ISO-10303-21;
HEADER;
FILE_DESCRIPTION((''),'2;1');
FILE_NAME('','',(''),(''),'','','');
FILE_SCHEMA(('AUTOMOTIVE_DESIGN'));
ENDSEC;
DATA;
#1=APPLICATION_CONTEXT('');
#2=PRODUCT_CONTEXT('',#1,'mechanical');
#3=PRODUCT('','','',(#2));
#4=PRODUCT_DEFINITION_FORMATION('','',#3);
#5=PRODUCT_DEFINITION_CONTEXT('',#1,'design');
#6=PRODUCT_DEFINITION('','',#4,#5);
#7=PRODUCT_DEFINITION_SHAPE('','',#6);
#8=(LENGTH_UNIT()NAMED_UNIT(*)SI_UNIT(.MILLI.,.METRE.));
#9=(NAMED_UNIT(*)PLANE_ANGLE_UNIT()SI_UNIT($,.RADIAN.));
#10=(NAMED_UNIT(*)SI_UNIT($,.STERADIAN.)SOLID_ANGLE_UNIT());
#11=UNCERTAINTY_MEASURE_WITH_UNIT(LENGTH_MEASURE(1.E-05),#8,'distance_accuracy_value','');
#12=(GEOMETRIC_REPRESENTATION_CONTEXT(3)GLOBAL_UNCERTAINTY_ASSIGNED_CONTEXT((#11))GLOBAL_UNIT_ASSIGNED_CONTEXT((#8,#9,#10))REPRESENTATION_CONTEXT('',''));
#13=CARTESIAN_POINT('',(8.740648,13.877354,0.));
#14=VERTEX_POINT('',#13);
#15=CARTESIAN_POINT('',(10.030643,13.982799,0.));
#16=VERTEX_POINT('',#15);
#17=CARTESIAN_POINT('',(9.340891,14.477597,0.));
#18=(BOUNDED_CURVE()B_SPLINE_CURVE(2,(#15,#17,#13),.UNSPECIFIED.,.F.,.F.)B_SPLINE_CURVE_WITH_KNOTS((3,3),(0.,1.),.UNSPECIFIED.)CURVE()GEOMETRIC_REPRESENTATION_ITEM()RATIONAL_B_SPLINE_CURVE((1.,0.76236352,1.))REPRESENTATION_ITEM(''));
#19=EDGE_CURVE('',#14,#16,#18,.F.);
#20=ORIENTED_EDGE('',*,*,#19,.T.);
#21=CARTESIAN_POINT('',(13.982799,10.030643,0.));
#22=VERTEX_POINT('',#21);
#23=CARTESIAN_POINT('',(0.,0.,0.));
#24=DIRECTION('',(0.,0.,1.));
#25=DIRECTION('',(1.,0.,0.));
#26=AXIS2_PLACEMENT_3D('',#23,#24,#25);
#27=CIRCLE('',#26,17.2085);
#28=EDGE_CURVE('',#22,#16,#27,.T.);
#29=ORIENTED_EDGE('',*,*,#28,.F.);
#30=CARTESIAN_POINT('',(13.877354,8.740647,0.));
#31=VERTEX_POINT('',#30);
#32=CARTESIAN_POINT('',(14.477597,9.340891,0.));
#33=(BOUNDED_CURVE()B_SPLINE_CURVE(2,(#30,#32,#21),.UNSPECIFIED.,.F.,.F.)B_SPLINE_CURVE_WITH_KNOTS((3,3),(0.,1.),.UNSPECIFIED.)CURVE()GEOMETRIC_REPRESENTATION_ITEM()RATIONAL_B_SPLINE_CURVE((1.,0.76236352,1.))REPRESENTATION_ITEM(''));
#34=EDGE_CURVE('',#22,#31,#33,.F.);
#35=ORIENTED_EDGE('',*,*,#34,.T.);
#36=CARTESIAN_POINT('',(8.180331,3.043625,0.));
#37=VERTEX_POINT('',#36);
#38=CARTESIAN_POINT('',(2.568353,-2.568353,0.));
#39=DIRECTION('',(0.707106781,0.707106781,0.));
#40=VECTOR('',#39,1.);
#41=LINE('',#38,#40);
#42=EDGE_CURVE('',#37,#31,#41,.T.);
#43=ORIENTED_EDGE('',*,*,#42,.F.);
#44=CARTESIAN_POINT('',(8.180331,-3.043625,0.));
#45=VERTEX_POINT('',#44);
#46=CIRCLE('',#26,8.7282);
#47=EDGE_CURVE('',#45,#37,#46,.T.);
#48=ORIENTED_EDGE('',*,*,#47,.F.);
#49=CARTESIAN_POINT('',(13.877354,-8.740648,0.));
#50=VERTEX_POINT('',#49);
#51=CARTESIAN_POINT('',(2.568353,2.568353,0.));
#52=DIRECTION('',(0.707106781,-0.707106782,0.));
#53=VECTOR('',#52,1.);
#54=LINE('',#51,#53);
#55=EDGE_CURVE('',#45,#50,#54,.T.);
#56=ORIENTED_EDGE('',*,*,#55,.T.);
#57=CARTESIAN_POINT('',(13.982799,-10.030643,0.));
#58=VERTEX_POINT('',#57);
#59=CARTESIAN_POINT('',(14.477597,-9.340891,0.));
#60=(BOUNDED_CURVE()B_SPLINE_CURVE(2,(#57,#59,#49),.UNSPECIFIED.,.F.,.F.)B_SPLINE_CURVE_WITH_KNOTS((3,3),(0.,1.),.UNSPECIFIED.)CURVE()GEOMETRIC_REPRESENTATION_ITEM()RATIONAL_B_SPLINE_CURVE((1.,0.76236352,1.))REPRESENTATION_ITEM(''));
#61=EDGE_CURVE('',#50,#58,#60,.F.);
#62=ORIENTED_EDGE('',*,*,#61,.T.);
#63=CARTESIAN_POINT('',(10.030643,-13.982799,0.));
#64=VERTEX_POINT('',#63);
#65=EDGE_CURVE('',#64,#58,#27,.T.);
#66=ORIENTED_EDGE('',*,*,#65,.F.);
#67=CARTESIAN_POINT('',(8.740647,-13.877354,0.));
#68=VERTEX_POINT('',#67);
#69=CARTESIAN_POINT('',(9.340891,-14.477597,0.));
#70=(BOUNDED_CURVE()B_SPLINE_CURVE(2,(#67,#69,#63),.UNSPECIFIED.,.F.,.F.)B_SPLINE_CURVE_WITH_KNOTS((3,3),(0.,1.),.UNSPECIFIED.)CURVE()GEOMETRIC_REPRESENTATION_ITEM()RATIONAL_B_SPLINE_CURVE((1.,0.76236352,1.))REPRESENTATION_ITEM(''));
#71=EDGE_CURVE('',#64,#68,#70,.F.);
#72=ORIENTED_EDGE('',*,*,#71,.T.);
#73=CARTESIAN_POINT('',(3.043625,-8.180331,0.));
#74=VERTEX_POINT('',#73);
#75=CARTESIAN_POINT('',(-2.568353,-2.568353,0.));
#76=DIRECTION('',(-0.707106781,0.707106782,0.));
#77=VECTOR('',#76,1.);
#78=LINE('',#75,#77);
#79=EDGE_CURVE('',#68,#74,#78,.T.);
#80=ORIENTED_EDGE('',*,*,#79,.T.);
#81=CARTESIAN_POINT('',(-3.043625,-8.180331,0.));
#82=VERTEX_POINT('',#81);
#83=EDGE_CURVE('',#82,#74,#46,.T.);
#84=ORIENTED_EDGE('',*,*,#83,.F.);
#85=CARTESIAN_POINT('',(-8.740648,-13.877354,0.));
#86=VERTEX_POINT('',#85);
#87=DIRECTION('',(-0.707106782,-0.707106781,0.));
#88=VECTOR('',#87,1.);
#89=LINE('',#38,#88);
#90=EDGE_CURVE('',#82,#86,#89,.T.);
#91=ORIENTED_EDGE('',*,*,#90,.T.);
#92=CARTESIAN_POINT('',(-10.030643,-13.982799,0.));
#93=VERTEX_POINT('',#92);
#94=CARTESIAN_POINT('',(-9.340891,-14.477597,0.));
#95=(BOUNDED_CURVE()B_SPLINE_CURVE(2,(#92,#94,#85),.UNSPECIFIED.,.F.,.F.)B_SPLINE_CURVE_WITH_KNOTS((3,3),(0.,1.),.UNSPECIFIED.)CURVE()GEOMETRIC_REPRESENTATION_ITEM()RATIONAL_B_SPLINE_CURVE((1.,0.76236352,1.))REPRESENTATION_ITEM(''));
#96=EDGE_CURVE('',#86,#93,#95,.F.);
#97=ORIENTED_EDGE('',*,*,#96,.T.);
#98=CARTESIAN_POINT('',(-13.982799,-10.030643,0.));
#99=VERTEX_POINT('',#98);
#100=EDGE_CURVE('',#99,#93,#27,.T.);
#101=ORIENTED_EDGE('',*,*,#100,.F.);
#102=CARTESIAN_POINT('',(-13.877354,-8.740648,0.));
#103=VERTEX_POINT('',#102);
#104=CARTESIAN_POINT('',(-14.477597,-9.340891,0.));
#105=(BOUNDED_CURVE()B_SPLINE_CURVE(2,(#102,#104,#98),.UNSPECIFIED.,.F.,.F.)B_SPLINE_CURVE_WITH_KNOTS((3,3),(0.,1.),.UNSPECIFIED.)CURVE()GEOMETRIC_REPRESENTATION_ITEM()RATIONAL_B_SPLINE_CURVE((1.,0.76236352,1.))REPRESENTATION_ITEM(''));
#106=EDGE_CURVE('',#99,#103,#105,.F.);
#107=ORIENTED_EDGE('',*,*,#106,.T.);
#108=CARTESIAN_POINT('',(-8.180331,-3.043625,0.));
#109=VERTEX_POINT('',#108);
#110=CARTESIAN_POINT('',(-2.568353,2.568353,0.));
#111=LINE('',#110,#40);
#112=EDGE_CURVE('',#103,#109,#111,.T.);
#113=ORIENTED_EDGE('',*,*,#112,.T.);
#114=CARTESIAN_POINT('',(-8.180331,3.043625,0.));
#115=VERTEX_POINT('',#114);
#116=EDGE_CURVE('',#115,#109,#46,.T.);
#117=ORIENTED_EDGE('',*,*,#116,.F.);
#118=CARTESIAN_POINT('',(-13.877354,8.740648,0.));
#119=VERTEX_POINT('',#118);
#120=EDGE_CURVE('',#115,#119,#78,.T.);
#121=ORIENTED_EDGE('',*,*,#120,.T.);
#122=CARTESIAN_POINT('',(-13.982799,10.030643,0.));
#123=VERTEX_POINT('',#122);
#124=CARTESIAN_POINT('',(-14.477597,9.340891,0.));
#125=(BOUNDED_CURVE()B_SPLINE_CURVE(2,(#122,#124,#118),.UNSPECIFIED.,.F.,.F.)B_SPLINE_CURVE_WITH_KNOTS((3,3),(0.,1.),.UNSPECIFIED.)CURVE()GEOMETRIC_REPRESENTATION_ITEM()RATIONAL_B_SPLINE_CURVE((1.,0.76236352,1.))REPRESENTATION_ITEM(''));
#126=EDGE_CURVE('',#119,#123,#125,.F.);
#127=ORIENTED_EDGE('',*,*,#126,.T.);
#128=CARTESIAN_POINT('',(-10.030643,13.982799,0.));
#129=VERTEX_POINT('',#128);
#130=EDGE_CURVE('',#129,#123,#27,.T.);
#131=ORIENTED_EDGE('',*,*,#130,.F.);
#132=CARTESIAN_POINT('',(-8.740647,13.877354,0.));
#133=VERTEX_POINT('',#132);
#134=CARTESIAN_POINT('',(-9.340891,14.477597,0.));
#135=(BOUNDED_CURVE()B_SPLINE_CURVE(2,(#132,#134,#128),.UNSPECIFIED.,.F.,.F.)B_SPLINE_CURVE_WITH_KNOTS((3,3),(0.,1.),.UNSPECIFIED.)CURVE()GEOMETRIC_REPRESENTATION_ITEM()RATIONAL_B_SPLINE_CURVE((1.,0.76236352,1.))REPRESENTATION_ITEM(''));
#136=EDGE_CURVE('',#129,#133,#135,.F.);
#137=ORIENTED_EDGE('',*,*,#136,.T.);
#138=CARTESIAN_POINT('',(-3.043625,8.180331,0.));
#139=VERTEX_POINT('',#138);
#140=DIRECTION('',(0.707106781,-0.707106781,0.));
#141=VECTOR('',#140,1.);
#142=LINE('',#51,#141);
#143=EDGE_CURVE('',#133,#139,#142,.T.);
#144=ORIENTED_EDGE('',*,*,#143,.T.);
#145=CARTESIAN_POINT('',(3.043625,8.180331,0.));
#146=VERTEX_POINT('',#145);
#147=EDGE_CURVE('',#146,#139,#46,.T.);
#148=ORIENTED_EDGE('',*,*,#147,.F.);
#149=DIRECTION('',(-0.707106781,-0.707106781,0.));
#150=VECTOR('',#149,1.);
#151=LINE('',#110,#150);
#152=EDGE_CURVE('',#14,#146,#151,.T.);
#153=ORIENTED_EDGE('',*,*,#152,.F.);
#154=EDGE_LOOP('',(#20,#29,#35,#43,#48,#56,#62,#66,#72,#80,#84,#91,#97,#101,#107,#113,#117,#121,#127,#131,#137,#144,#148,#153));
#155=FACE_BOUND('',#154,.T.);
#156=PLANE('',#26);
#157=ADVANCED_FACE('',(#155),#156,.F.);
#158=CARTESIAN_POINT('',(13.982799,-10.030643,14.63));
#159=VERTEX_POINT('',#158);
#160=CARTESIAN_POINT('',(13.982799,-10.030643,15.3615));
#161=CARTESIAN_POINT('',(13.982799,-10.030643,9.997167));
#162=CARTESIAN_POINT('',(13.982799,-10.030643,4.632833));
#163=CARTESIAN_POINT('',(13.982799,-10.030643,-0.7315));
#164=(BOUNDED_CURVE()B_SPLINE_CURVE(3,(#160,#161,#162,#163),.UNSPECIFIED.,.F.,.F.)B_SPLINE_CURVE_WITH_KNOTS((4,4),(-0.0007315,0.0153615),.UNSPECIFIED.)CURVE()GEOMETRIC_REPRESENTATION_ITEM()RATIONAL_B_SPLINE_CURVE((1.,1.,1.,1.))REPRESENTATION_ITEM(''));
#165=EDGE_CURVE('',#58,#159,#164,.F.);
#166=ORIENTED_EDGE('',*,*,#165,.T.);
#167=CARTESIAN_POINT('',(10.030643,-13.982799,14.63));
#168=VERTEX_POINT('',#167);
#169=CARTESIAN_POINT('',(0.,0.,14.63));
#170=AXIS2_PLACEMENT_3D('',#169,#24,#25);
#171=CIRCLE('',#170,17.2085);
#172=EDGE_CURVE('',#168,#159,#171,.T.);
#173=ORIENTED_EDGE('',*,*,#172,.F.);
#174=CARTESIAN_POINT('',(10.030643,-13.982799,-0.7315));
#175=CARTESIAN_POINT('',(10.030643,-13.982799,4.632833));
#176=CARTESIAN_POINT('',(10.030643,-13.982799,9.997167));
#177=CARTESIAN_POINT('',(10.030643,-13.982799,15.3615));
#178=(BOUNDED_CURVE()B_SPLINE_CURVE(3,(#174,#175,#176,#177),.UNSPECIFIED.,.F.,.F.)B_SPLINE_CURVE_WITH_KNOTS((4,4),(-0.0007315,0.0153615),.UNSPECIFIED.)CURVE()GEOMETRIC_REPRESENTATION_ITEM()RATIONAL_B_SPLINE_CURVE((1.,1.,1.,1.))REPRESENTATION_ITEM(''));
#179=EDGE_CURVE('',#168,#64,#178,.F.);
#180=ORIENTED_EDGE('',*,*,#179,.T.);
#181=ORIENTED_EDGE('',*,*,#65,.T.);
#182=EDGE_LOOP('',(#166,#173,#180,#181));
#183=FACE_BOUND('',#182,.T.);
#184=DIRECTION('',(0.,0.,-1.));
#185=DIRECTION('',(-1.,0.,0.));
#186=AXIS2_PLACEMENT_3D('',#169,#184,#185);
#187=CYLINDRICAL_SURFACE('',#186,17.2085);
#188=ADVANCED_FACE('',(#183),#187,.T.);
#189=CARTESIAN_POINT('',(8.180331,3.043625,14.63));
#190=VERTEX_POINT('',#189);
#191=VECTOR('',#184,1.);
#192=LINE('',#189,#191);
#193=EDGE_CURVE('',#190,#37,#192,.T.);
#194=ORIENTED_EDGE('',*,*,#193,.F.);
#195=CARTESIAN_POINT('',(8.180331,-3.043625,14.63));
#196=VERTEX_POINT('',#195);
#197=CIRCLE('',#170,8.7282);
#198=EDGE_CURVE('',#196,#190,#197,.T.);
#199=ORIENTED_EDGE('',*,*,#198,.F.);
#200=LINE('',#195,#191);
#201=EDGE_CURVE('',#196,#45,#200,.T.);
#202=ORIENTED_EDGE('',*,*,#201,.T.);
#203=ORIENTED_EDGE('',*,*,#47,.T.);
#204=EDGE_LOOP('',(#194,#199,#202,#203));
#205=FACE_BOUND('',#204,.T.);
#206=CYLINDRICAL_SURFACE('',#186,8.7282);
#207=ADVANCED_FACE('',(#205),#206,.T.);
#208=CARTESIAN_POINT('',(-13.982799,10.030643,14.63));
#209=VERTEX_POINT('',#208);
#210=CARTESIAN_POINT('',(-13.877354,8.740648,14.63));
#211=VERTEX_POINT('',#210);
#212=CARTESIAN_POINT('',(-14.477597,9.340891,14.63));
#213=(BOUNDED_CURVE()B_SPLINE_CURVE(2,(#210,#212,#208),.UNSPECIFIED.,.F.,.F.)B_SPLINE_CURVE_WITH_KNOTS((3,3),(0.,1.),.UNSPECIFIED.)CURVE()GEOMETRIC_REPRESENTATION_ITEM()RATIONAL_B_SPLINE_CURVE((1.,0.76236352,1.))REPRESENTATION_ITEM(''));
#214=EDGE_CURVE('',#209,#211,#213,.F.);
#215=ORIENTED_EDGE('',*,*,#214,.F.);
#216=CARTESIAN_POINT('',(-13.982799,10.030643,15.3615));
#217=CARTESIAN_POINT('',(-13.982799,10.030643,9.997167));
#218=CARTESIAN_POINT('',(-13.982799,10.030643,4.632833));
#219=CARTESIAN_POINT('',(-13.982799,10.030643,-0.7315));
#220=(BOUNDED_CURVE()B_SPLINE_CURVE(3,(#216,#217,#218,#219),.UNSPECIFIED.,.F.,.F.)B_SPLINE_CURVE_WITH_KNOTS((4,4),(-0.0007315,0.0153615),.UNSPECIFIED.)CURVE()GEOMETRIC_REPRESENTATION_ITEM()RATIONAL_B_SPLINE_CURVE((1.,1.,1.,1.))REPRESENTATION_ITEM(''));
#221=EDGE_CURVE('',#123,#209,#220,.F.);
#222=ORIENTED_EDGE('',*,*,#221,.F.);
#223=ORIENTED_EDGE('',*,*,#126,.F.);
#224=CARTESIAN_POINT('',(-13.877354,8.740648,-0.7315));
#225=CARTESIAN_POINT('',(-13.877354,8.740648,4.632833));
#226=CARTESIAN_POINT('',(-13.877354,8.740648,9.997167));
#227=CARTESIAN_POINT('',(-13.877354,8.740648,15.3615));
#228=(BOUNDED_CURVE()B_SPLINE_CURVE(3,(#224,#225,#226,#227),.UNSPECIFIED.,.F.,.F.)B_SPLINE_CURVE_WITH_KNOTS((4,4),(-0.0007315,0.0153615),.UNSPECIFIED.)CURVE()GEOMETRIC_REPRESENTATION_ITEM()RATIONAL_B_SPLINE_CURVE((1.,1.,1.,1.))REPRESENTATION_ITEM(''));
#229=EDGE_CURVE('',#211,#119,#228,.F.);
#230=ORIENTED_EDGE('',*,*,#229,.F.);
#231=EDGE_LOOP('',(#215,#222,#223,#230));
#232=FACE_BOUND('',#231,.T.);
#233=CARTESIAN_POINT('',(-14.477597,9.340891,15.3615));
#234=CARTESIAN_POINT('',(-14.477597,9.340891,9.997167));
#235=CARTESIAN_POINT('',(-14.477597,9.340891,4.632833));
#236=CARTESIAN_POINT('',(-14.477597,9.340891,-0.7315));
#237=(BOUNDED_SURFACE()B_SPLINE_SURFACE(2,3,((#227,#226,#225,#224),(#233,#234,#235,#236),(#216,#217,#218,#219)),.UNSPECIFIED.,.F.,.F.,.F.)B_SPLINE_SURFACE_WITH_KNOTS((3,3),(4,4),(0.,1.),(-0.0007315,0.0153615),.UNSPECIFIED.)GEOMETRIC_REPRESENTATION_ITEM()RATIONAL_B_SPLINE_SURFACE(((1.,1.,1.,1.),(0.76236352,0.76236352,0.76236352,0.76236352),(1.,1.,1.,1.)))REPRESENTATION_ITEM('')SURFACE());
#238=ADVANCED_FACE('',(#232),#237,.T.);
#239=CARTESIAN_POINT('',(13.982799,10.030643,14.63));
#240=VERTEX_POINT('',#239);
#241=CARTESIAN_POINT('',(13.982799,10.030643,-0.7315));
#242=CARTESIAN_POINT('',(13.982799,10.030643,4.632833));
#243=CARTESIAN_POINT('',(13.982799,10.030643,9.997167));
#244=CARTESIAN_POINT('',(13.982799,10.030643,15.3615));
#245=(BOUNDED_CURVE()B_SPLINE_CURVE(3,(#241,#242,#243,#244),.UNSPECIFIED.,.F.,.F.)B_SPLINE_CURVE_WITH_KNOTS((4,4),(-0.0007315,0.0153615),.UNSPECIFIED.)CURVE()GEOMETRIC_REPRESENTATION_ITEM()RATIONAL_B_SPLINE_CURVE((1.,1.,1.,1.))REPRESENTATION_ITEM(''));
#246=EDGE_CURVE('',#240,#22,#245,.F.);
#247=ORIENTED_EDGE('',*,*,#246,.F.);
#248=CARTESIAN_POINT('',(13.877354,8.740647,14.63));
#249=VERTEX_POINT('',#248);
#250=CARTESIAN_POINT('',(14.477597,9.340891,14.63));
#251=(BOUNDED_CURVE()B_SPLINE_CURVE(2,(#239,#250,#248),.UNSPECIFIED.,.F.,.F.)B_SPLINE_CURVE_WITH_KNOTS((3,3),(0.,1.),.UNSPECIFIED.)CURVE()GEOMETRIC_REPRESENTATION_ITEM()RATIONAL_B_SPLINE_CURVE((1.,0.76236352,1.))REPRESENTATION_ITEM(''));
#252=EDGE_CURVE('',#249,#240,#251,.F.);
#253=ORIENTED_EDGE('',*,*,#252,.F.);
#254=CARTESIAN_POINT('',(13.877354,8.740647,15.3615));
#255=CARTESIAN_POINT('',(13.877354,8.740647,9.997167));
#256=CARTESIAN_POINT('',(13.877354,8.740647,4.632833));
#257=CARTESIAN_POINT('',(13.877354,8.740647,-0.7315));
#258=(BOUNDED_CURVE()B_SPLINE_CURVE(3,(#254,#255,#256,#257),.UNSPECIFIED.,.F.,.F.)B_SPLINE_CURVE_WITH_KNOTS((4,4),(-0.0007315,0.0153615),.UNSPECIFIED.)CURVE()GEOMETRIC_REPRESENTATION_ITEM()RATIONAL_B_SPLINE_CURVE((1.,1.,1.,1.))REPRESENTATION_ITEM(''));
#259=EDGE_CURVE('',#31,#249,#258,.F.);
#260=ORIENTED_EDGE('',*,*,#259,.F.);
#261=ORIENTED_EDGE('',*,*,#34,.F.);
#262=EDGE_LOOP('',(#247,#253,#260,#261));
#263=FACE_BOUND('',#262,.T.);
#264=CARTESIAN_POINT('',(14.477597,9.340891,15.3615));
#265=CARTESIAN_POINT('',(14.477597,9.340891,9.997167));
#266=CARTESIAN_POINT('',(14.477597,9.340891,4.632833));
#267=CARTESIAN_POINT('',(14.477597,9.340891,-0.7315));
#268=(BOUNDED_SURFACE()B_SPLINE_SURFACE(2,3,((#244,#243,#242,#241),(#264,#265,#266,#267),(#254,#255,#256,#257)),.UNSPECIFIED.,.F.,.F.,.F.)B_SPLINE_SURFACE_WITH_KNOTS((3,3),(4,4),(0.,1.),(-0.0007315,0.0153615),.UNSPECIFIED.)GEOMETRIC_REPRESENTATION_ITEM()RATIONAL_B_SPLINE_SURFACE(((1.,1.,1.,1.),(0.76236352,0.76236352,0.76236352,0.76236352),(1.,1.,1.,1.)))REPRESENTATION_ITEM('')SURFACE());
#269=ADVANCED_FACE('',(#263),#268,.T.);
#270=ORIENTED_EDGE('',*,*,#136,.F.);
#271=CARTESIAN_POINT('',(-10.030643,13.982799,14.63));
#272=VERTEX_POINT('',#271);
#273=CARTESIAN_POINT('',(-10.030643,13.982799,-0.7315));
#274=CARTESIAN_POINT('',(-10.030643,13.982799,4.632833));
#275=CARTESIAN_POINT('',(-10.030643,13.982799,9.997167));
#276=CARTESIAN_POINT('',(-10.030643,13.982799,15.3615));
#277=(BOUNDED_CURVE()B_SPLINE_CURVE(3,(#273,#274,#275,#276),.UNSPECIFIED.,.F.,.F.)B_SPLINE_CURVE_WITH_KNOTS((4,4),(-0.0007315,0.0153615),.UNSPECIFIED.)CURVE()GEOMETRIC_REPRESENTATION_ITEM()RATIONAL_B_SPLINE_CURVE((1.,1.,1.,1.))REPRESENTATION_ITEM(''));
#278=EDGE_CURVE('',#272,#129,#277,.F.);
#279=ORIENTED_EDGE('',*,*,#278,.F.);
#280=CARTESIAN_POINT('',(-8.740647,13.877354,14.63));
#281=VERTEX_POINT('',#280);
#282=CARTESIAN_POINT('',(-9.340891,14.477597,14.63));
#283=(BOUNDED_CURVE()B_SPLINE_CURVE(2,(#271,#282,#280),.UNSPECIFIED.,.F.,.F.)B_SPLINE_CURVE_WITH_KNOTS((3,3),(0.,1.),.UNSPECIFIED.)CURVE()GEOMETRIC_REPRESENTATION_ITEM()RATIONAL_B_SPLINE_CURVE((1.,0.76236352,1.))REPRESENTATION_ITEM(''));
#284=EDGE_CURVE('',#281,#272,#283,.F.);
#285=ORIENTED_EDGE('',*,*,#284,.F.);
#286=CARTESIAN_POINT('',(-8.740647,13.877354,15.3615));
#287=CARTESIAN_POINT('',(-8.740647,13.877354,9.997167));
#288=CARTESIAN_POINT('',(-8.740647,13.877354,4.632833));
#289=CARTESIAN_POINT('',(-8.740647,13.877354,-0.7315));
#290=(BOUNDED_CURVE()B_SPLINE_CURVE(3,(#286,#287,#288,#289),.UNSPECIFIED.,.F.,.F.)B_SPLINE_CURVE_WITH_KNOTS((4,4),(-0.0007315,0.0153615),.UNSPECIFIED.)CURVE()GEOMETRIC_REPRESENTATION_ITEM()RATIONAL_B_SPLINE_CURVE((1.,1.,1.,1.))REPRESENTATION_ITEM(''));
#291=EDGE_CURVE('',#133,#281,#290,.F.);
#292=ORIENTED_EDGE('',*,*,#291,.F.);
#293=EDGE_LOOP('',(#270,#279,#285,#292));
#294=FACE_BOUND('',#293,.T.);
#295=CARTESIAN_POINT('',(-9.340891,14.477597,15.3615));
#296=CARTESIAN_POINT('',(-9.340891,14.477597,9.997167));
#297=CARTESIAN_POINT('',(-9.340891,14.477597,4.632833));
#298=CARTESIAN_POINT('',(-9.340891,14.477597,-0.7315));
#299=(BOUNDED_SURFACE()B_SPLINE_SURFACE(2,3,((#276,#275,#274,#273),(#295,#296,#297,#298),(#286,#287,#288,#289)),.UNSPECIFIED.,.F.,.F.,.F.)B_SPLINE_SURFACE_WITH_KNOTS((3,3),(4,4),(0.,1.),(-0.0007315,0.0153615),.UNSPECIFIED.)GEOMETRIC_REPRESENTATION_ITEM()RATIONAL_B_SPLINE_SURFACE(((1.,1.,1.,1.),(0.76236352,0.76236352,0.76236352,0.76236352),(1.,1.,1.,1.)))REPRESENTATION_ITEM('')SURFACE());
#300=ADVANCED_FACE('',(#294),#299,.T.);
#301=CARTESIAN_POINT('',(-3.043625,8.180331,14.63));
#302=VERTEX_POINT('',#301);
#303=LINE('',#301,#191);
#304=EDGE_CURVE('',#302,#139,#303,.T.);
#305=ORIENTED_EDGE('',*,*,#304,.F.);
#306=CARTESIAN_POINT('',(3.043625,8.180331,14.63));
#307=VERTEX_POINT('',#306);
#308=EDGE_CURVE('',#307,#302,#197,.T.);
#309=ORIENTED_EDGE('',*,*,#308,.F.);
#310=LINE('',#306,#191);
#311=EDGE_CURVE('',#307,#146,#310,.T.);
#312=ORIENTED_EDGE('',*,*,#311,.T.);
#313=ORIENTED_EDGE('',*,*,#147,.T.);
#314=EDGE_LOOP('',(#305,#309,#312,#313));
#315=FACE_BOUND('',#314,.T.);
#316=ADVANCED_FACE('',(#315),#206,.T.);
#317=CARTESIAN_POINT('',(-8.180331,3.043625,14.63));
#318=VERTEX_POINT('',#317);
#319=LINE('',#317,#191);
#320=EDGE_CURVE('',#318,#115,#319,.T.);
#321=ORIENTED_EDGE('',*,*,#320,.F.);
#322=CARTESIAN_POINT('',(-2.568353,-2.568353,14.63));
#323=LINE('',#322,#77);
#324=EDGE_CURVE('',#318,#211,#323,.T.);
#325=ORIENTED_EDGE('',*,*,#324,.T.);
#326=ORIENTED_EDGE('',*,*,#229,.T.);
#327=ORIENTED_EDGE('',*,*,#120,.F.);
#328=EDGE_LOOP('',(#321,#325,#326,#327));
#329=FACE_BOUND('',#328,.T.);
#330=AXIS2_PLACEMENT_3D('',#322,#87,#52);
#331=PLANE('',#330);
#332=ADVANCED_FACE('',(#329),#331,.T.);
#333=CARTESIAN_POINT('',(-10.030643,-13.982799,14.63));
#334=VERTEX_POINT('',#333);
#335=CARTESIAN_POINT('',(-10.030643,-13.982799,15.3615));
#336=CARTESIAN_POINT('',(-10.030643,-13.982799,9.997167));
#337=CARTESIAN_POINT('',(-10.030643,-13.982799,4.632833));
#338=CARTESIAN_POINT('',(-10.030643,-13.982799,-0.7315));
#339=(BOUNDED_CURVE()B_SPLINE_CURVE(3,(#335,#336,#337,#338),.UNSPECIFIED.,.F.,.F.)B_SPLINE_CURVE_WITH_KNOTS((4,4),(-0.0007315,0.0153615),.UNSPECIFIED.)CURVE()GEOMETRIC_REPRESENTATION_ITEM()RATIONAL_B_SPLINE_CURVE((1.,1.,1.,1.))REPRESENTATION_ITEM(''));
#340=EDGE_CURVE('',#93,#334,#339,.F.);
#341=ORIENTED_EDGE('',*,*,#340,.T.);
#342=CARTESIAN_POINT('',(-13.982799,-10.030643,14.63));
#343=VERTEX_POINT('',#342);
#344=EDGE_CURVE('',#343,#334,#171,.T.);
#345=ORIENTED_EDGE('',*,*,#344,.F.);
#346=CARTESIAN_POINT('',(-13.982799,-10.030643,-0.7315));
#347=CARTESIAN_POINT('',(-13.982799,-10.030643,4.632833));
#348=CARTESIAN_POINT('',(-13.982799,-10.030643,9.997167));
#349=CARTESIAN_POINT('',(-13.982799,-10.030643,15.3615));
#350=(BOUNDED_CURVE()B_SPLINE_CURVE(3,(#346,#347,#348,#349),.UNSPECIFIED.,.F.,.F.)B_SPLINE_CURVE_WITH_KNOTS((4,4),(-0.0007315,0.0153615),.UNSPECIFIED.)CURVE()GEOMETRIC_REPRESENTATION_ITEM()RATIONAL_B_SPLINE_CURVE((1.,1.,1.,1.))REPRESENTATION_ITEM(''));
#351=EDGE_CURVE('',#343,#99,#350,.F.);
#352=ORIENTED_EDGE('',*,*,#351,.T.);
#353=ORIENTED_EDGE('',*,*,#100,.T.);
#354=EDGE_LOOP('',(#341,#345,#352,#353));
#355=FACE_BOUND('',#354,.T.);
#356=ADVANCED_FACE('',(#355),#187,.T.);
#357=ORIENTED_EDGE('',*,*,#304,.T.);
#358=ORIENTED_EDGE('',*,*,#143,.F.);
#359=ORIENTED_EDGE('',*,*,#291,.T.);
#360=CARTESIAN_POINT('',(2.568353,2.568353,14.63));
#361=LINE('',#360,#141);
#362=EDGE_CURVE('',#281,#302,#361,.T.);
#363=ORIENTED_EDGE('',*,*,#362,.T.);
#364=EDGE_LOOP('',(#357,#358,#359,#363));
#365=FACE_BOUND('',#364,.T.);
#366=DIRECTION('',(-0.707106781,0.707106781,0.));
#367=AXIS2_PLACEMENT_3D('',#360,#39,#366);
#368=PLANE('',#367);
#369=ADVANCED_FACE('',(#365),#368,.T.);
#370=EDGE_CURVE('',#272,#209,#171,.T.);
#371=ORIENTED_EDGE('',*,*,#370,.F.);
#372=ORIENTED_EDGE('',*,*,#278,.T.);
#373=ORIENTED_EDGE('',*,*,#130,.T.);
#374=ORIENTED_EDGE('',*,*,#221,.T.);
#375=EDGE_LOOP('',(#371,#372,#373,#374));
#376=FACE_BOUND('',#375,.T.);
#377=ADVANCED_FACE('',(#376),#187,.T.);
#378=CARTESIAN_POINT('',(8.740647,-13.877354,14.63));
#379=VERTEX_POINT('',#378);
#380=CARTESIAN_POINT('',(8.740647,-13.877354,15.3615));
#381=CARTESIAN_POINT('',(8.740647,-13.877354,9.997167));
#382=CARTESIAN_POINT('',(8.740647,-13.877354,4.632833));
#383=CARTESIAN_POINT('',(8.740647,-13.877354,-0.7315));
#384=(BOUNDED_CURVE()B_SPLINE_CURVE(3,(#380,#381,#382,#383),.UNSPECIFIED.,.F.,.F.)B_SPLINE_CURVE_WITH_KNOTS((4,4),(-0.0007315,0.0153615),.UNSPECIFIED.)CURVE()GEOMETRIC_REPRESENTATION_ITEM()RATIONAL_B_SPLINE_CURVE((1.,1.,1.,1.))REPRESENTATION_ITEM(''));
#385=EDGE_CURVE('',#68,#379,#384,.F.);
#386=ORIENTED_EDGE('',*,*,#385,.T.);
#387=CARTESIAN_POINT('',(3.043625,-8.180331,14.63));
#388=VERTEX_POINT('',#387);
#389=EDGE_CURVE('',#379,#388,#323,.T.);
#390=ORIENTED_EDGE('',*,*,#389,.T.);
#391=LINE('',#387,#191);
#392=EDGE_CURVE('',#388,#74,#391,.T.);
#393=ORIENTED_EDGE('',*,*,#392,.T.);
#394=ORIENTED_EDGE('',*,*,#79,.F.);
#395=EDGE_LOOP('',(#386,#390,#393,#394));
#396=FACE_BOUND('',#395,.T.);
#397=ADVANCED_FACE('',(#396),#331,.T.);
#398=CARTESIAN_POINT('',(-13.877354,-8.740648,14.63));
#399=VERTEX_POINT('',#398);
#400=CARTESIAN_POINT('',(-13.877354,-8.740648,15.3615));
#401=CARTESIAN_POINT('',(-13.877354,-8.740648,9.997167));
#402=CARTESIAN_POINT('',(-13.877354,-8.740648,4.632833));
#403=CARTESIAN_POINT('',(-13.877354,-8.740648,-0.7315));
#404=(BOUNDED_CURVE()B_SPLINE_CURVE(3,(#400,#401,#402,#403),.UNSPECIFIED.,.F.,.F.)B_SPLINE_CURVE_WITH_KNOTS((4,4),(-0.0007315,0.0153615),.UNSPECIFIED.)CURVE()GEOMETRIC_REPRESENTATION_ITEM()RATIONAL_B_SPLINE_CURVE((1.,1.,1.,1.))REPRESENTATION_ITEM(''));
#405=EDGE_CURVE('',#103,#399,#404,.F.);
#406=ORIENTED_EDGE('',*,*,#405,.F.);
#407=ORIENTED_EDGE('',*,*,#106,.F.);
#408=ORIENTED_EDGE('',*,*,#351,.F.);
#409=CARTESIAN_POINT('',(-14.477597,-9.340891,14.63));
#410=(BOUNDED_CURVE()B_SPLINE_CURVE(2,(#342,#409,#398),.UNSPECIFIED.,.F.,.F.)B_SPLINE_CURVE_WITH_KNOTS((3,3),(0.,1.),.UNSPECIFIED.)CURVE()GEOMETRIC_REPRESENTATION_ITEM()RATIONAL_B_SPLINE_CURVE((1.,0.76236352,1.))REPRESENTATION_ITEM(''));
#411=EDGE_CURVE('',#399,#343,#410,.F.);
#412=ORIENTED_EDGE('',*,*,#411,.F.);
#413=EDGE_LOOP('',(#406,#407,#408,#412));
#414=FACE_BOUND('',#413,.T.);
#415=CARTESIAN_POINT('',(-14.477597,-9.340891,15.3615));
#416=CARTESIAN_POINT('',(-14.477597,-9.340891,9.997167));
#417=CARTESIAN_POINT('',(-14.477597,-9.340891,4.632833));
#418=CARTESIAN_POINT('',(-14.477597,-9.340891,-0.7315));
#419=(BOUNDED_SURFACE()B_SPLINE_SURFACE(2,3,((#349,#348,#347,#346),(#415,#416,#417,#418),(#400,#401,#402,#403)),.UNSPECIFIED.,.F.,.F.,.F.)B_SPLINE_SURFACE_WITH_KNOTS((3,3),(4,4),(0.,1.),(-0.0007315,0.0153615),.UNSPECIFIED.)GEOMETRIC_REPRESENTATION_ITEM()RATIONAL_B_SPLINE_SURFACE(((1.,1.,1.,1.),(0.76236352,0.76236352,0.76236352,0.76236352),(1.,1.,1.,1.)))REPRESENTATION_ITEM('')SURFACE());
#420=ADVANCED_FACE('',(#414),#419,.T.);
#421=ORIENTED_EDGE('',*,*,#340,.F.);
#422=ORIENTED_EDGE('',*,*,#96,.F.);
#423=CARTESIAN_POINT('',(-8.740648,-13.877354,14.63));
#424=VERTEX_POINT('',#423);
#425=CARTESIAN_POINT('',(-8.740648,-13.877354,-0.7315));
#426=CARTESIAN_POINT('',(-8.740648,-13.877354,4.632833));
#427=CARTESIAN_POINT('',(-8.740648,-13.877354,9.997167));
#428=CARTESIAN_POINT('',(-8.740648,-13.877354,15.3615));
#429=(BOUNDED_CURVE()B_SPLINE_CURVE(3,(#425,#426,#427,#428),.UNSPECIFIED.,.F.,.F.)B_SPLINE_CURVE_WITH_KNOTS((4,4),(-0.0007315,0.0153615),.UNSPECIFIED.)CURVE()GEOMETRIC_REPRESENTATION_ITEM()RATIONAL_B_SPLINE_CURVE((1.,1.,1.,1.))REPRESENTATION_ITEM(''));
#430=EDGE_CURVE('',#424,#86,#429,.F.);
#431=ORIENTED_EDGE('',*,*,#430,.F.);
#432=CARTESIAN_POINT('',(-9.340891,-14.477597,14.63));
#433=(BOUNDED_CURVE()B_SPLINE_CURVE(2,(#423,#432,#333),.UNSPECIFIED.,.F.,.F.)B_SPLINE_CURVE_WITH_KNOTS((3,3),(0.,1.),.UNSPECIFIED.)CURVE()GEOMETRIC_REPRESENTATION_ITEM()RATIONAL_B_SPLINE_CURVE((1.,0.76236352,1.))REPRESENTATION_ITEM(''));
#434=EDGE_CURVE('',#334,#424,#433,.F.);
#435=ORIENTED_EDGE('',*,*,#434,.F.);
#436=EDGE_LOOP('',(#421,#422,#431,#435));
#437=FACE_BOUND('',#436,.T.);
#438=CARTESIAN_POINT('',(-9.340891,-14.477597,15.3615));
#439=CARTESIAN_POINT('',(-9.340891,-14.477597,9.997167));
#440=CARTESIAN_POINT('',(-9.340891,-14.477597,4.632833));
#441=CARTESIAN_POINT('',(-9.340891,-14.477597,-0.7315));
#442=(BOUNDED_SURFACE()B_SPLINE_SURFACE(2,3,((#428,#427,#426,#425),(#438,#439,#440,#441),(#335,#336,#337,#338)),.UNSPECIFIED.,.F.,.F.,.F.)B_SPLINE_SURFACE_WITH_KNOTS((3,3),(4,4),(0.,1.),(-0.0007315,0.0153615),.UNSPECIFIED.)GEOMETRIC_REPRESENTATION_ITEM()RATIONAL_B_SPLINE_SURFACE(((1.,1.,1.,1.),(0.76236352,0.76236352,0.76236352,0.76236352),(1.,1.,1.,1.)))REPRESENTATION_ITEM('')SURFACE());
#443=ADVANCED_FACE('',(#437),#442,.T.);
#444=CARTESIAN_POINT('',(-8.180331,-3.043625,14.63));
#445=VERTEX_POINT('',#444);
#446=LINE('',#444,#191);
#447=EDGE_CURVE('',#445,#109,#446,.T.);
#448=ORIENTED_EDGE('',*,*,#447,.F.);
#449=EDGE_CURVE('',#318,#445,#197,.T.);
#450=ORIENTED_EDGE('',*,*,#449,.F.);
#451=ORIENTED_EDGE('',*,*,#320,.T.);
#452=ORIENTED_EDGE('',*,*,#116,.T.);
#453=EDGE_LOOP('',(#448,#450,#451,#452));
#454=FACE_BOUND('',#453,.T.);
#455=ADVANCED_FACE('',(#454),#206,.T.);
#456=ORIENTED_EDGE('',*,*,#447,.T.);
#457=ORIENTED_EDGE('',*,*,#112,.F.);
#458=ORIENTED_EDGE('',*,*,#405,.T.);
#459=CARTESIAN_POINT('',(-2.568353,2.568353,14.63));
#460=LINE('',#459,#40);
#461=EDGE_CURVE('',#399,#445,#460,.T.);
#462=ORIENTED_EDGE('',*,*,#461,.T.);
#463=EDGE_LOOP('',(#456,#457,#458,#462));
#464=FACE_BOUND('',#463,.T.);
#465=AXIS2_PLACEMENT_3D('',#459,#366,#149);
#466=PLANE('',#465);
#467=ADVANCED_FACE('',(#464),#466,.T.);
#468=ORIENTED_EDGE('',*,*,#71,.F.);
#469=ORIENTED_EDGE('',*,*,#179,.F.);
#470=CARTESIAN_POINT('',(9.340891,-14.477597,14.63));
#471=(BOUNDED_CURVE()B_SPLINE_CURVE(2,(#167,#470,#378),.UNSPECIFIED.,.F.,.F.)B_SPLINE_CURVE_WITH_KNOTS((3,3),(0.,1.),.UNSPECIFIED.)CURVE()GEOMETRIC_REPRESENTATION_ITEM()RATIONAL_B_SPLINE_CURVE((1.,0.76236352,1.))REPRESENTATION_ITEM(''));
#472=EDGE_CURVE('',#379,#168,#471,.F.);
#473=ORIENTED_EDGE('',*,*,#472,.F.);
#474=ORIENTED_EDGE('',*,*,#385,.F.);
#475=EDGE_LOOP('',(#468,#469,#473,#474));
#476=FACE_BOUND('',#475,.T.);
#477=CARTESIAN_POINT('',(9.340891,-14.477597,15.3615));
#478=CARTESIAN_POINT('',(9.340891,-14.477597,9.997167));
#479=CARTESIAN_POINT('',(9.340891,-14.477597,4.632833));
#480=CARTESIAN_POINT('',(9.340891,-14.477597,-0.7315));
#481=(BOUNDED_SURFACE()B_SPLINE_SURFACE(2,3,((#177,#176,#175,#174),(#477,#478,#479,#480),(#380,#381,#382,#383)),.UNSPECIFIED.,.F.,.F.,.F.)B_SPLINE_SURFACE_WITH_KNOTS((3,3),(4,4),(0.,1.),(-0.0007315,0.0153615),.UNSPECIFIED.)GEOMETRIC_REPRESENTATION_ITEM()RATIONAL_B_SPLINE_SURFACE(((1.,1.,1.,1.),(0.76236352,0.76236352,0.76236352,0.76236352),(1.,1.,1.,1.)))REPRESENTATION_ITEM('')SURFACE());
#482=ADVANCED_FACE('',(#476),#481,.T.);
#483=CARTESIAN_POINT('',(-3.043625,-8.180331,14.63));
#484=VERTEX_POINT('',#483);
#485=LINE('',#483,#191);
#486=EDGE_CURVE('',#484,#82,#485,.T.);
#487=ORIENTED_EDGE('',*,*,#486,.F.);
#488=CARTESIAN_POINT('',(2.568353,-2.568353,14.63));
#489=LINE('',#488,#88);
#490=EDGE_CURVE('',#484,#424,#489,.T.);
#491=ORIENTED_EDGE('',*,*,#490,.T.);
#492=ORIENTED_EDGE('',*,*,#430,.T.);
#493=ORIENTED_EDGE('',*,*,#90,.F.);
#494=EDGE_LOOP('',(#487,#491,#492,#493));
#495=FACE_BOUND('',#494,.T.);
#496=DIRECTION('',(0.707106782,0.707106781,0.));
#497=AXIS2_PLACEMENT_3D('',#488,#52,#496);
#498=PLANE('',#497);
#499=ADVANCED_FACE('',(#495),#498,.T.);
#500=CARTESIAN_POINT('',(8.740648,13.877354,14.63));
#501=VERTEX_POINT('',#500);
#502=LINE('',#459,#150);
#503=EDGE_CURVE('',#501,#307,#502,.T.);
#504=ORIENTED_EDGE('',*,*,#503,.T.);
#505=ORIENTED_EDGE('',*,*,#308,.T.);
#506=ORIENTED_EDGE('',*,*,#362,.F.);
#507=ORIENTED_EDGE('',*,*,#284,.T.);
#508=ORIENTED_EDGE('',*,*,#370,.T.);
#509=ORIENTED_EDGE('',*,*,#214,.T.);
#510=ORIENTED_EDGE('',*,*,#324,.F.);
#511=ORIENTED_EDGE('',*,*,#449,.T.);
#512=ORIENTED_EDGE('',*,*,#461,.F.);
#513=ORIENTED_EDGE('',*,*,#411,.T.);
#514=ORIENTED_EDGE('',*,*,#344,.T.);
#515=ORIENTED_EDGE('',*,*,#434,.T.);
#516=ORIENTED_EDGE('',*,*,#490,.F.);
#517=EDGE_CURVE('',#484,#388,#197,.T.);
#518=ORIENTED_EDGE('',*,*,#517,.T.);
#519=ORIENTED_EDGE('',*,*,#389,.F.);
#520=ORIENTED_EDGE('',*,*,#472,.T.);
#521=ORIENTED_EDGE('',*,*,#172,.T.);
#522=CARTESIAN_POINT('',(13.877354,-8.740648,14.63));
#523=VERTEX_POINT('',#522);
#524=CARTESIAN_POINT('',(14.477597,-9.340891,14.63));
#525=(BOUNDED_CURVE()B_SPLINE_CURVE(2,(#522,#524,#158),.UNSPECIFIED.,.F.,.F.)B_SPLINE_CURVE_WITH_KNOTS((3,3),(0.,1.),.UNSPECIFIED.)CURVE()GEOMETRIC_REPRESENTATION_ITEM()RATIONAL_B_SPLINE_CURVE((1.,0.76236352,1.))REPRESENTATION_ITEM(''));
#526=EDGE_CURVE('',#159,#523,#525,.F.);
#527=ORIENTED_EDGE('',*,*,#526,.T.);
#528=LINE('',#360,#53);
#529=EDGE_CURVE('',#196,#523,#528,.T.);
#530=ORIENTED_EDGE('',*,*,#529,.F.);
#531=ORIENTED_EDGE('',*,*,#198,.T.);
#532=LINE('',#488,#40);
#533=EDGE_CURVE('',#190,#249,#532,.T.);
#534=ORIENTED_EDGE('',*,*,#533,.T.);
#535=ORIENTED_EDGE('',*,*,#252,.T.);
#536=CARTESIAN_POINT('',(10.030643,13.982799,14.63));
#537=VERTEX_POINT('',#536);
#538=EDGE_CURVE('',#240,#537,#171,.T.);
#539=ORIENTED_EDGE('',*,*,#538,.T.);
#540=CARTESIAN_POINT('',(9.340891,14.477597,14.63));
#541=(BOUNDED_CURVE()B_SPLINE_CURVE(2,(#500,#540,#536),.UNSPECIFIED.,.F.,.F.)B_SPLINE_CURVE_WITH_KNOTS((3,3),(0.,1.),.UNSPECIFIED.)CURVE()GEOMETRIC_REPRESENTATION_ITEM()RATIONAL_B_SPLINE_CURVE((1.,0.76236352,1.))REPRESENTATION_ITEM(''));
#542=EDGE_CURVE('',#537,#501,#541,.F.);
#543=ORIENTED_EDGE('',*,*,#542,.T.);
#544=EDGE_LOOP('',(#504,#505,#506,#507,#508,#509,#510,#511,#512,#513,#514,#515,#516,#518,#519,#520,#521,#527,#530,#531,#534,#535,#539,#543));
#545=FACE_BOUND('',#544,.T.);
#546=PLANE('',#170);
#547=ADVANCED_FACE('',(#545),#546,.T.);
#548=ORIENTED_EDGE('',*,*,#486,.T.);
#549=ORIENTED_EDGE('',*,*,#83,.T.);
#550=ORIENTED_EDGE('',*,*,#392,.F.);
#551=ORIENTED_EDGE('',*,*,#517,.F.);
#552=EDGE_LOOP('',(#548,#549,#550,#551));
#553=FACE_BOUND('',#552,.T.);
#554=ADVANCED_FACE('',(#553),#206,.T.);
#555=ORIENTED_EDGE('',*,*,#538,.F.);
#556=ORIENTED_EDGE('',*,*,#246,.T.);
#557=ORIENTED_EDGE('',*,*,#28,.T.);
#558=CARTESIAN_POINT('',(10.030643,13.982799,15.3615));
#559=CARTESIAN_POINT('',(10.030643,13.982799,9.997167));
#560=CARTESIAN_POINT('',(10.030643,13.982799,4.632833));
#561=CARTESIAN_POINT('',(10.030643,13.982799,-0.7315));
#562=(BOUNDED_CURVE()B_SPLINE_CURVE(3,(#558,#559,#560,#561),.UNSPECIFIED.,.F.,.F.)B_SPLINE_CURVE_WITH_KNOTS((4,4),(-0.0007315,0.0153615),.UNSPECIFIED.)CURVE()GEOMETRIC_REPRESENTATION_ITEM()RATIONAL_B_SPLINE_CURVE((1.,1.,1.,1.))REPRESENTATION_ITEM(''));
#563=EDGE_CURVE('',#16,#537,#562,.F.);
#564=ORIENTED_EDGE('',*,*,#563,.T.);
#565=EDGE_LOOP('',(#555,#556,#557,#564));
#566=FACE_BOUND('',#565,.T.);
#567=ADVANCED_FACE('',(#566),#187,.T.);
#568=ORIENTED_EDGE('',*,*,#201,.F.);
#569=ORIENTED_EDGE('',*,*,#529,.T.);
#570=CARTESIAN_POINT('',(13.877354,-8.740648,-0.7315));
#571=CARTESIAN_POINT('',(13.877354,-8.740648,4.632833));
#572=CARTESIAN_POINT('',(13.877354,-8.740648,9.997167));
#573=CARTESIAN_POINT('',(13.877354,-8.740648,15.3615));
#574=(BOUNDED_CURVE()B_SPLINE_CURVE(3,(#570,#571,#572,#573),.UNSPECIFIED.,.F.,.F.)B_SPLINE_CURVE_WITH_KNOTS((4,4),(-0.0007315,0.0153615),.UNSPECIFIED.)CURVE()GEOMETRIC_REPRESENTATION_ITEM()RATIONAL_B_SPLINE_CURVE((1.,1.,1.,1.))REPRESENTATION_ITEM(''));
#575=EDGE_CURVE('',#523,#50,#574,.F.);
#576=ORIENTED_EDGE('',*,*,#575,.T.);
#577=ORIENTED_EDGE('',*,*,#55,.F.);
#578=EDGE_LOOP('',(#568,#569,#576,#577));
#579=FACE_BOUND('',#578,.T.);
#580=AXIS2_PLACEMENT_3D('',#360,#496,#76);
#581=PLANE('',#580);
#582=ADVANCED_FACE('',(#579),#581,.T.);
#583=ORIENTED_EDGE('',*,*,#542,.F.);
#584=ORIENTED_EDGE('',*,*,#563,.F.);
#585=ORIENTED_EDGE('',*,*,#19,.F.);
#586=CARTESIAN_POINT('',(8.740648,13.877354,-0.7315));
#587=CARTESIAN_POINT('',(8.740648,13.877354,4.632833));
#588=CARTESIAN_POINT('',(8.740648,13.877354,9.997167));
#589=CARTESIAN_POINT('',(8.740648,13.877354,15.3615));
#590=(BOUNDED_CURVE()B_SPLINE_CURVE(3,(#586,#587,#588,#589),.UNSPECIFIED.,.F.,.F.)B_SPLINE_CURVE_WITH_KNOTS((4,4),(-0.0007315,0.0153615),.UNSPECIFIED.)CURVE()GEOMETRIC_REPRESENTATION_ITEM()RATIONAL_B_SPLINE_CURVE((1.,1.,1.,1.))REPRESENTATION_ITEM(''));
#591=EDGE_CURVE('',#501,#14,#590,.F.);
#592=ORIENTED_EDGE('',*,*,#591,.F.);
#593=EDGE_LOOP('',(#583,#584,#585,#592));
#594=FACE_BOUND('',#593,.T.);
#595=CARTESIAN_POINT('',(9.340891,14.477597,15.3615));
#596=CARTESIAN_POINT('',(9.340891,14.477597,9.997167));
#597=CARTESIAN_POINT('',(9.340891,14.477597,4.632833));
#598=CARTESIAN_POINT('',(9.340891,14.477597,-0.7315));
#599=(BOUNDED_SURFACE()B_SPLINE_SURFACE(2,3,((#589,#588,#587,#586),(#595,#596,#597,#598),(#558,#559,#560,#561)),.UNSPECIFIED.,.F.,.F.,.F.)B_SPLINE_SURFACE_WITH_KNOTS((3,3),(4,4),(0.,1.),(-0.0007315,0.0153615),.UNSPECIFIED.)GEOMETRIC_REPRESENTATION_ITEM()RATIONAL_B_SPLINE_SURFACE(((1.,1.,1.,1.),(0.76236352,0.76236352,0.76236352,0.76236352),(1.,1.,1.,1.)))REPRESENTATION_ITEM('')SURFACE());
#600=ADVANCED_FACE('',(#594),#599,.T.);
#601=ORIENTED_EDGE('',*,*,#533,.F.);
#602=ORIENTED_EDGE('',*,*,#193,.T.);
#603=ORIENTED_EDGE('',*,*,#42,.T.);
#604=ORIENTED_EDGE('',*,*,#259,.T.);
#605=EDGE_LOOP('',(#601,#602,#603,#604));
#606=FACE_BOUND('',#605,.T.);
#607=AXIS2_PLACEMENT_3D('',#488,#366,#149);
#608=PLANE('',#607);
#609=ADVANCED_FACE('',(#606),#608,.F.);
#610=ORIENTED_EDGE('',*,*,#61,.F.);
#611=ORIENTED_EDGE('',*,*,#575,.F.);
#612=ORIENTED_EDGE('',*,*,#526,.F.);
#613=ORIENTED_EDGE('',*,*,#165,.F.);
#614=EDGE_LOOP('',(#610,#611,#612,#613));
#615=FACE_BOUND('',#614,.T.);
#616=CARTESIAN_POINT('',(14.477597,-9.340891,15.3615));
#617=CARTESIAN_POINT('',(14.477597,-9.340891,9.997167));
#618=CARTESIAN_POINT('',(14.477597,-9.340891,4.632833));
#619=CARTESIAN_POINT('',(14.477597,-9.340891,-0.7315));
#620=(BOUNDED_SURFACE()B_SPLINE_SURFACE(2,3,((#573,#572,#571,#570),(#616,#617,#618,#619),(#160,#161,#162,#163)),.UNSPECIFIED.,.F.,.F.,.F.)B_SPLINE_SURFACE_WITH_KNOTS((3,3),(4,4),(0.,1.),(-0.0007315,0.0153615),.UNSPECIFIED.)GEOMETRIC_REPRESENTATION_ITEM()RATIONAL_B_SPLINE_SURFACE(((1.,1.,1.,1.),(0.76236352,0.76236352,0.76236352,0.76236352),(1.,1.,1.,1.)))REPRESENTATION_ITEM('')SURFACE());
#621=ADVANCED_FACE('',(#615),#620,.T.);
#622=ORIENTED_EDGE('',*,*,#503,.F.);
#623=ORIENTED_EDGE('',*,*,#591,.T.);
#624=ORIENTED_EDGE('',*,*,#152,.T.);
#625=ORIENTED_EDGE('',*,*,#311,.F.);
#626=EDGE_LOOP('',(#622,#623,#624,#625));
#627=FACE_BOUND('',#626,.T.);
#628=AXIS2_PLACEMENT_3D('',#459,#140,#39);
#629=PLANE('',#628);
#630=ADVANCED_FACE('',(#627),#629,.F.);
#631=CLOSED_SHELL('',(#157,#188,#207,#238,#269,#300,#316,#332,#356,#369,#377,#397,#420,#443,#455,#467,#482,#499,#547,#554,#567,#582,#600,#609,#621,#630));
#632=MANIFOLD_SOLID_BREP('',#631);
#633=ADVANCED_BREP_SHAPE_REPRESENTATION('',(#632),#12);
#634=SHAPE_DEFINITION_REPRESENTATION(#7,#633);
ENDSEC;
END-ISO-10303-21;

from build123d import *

# Parameters (mm, degrees)
BOSS_EXTRUDE1_DEPTH = 14.63
FILLET1_R           = 1


with BuildPart() as part:
    # Sketch1 → Boss-Extrude1 (new body)
    with BuildSketch(Plane.XY):
        with BuildLine():
            Line((-8.519586833, 13.656293319), (-9.325754445, 14.46246093))
            ThreePointArc((-9.325754445, 14.46246093), (-12.168247041, 12.168247045), (-14.462460931, 9.325754452))
            Line((-14.462460931, 9.325754452), (-11.8745961, 6.737889618))
            Line((-11.874596103, 6.737889615), (-10.218772523, 5.082066036))
            Line((-10.218772523, 5.082066036), (-8.180331434, 3.043624946))
            ThreePointArc((-8.180331434, 3.043624946), (-8.7282, 0), (-8.18033144, -3.043624947))
            Line((-8.18033144, -3.043624947), (-10.218772531, -5.082066037))
            Line((-10.218772528, -5.082066035), (-13.656293332, -8.519586838))
            Line((-13.656293332, -8.519586838), (-14.462460943, -9.32575445))
            ThreePointArc((-14.462460943, -9.32575445), (-12.168247058, -12.168247046), (-9.325754465, -14.462460936))
            Line((-9.325754465, -14.462460936), (-8.519586857, -13.656293329))
            Line((-8.519586853, -13.656293332), (-5.082066058, -10.218772534))
            Line((-5.082066049, -10.218772528), (-3.043624959, -8.180331439))
            ThreePointArc((-3.043624959, -8.180331439), (-2.566843213, -8.342229394), (-2.081519018, -8.476364428))
            ThreePointArc((-2.081519021, -8.476364441), (-1e-08, -8.728200016), (2.081519001, -8.47636444))
            ThreePointArc((2.081518999, -8.476364431), (2.566843194, -8.342229397), (3.04362494, -8.180331443))
            Line((3.04362494, -8.180331443), (3.232471481, -8.369177985))
            Line((3.232471481, -8.369177985), (5.082066029, -10.218772535))
            Line((5.082066028, -10.21877254), (8.519586825, -13.656293337))
            Line((8.519586826, -13.656293336), (9.325754437, -14.462460949))
            ThreePointArc((9.325754437, -14.462460949), (12.168247033, -12.168247063), (14.462460923, -9.32575447))
            Line((14.462460923, -9.32575447), (13.656293316, -8.519586862))
            Line((13.656293316, -8.519586862), (10.218772514, -5.082066055))
            Line((10.218772514, -5.082066055), (8.180331425, -3.043624964))
            ThreePointArc((8.180331425, -3.043624964), (8.728199992, -1.8e-08), (8.180331432, 3.043624929))
            Line((8.180331432, 3.043624929), (10.218772523, 5.082066019))
            Line((10.218772523, 5.082066019), (13.656293323, 8.51958682))
            Line((13.656293323, 8.51958682), (14.462460935, 9.325754432))
            ThreePointArc((14.462460935, 9.325754432), (12.16824705, 12.168247028), (9.325754457, 14.462460918))
            Line((9.325754457, 14.462460918), (8.519586849, 13.65629331))
            Line((8.519586849, 13.65629331), (5.082066046, 10.218772512))
            Line((5.082066041, 10.21877251), (3.043624951, 8.18033142))
            ThreePointArc((3.043624951, 8.18033142), (5e-09, 8.728199987), (-3.043624942, 8.180331427))
            Line((-3.043624942, 8.180331427), (-3.232471485, 8.36917797))
            Line((-3.232471485, 8.36917797), (-5.082066032, 10.218772518))
            Line((-5.082066032, 10.218772518), (-8.519586833, 13.656293319))
        make_face()
    extrude(amount=BOSS_EXTRUDE1_DEPTH)

    # Fillet1
    fillet1_edges = [part.edges().sort_by_distance(p)[0] for p in [
        (14.462460923, -9.32575447, 7.315),
        (9.325754437, -14.462460949, 7.315),
        (-9.325754465, -14.462460936, 7.315),
        (-14.462460943, -9.32575445, 7.315),
        (-14.462460931, 9.325754452, 7.315),
        (-9.325754445, 14.46246093, 7.315),
        (9.325754457, 14.462460918, 7.315),
        (14.462460935, 9.325754432, 7.315),
    ]]
    fillet(fillet1_edges, radius=FILLET1_R)


solid = part.part
